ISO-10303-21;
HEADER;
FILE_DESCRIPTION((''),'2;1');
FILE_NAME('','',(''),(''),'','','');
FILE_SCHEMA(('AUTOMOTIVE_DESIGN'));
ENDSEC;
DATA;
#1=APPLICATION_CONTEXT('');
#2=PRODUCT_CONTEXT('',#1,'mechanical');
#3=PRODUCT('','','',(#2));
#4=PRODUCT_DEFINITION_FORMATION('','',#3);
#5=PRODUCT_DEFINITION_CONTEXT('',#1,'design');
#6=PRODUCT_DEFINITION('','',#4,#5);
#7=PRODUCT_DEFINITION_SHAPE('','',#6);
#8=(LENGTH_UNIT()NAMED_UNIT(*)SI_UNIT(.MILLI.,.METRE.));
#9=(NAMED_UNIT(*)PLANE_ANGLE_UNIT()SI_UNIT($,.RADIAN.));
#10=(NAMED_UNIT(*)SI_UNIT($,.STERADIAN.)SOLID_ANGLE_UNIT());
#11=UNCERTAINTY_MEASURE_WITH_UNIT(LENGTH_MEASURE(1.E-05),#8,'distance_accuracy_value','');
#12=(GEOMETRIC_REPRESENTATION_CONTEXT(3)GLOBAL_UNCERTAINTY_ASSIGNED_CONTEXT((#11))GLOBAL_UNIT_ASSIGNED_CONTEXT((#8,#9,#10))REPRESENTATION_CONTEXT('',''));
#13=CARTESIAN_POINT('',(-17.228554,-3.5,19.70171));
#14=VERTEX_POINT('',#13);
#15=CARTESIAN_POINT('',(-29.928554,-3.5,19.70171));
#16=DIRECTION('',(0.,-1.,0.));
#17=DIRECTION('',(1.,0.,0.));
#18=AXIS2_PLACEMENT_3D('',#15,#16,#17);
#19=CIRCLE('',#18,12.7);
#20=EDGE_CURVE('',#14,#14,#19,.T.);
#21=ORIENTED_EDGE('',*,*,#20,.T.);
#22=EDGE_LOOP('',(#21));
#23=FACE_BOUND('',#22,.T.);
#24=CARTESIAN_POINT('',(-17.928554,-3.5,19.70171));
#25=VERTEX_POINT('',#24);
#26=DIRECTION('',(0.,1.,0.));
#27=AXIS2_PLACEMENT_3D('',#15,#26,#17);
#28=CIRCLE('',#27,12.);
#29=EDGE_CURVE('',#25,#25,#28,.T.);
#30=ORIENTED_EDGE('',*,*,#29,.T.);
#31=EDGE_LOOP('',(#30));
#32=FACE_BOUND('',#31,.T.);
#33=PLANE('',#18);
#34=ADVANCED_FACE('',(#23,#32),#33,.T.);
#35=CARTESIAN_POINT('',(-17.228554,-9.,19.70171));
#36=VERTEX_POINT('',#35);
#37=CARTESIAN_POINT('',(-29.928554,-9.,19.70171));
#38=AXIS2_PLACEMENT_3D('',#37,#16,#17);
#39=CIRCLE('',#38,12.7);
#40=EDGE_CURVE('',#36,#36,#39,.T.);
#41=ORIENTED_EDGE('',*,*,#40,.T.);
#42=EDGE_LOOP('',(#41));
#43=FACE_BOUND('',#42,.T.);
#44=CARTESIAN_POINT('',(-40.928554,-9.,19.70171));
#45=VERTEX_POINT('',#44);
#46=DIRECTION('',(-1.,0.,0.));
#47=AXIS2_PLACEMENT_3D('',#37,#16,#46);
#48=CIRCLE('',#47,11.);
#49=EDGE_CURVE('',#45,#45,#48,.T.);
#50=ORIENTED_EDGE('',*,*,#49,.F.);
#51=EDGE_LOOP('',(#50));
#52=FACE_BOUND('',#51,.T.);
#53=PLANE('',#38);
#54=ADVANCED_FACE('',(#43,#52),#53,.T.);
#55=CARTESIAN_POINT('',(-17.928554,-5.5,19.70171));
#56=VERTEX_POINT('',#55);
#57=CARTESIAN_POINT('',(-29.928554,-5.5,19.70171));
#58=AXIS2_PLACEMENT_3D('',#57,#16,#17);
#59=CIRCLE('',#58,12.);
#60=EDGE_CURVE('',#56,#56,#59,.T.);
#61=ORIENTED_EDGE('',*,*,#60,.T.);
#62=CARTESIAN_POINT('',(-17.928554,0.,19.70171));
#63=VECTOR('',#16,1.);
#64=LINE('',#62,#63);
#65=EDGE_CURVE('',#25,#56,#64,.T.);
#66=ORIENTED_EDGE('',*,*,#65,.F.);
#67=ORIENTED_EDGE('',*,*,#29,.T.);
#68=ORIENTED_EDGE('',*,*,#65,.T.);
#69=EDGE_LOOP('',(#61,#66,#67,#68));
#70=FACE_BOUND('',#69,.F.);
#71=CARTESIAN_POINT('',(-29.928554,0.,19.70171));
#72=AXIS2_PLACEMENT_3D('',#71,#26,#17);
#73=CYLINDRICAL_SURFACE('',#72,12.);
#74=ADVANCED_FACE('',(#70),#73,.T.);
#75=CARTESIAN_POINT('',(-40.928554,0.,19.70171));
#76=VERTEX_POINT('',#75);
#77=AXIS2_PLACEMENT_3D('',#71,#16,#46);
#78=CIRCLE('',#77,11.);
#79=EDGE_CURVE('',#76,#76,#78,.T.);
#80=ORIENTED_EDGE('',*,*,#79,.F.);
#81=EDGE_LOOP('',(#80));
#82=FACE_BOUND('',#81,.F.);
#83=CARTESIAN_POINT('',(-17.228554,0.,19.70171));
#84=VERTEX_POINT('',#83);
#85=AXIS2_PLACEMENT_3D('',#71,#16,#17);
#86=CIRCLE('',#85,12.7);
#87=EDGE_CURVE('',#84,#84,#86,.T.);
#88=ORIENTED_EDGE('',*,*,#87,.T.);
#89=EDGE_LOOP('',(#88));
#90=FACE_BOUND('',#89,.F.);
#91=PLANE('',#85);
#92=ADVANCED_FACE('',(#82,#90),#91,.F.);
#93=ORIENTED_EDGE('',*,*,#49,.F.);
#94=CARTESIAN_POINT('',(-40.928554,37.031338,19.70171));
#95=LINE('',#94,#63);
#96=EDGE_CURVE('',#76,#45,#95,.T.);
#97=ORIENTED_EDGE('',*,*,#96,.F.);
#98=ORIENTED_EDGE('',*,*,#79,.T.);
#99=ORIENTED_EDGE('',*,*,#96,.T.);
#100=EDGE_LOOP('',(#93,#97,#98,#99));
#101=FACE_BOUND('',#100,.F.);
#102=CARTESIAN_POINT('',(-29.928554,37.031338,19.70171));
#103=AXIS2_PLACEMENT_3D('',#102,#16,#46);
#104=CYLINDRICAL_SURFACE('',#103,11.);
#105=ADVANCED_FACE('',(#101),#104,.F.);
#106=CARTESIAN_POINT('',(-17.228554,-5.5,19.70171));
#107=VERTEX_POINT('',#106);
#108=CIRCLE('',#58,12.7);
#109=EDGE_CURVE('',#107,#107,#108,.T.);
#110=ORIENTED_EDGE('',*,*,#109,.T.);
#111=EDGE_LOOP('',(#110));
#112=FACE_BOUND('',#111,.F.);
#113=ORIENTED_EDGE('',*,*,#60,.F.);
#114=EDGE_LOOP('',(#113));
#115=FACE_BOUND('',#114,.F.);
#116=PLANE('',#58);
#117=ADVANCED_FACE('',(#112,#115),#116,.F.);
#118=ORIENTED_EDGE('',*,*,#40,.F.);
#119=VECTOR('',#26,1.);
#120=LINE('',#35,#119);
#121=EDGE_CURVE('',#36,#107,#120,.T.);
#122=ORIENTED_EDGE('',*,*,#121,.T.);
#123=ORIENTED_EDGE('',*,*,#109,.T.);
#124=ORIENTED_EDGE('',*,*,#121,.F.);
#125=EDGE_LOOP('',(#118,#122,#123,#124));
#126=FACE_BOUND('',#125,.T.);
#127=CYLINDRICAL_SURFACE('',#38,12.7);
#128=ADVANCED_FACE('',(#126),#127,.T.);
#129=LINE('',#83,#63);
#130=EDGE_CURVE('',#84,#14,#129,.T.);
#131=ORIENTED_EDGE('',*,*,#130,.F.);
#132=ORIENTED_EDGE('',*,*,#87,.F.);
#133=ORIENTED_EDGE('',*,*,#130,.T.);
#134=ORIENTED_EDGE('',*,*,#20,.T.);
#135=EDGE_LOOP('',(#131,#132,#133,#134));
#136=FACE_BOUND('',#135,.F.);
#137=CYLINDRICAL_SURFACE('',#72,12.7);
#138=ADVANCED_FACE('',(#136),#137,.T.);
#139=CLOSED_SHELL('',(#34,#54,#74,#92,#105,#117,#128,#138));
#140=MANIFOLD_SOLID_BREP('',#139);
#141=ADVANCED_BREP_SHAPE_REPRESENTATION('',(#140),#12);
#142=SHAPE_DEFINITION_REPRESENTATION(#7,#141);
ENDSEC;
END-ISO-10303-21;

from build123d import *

# Parameters (mm, degrees)
F0_R     = 12
F1_DEPTH = 9
F2_R     = 12.7
F3_DEPTH = 3.5
F4_R     = 12.7
F4_R_2   = 12
F5_DEPTH = 3.5
F6_D     = 22


# Not quite as in the source:
# - a feature names something its author has since deleted; it is built from what else it names


with BuildPart() as f1:
    # F0 (on Front) → F1 (new body)
    with BuildSketch(Plane.XZ):
        with Locations((-29.9285538495, 19.7017099708)):
            Circle(F0_R)
    extrude(amount=F1_DEPTH)

    # F2 (on Front) → F3 (join)
    with BuildSketch(Plane.XZ):
        with Locations((-29.9285538495, 19.7017099708)):
            Circle(F2_R)
    extrude(amount=F3_DEPTH)

    # F4 (on face) → F5 (join)
    with BuildSketch(Plane.XZ.offset(9)):
        with Locations((-29.9285538495, 19.7017099708)):
            Circle(F4_R)
        with Locations((-29.9285538495, 19.7017099708)):
            Circle(F4_R_2, mode=Mode.SUBTRACT)
    extrude(amount=-F5_DEPTH)

    # F6 (through all)
    with Locations(Plane(origin=(0, 0, 0), x_dir=(1, 0, 0), z_dir=(0, 1, 0))):
        with Locations((-29.9285538495, -19.7017099708)):
            Hole(F6_D / 2)


solid = f1.part
